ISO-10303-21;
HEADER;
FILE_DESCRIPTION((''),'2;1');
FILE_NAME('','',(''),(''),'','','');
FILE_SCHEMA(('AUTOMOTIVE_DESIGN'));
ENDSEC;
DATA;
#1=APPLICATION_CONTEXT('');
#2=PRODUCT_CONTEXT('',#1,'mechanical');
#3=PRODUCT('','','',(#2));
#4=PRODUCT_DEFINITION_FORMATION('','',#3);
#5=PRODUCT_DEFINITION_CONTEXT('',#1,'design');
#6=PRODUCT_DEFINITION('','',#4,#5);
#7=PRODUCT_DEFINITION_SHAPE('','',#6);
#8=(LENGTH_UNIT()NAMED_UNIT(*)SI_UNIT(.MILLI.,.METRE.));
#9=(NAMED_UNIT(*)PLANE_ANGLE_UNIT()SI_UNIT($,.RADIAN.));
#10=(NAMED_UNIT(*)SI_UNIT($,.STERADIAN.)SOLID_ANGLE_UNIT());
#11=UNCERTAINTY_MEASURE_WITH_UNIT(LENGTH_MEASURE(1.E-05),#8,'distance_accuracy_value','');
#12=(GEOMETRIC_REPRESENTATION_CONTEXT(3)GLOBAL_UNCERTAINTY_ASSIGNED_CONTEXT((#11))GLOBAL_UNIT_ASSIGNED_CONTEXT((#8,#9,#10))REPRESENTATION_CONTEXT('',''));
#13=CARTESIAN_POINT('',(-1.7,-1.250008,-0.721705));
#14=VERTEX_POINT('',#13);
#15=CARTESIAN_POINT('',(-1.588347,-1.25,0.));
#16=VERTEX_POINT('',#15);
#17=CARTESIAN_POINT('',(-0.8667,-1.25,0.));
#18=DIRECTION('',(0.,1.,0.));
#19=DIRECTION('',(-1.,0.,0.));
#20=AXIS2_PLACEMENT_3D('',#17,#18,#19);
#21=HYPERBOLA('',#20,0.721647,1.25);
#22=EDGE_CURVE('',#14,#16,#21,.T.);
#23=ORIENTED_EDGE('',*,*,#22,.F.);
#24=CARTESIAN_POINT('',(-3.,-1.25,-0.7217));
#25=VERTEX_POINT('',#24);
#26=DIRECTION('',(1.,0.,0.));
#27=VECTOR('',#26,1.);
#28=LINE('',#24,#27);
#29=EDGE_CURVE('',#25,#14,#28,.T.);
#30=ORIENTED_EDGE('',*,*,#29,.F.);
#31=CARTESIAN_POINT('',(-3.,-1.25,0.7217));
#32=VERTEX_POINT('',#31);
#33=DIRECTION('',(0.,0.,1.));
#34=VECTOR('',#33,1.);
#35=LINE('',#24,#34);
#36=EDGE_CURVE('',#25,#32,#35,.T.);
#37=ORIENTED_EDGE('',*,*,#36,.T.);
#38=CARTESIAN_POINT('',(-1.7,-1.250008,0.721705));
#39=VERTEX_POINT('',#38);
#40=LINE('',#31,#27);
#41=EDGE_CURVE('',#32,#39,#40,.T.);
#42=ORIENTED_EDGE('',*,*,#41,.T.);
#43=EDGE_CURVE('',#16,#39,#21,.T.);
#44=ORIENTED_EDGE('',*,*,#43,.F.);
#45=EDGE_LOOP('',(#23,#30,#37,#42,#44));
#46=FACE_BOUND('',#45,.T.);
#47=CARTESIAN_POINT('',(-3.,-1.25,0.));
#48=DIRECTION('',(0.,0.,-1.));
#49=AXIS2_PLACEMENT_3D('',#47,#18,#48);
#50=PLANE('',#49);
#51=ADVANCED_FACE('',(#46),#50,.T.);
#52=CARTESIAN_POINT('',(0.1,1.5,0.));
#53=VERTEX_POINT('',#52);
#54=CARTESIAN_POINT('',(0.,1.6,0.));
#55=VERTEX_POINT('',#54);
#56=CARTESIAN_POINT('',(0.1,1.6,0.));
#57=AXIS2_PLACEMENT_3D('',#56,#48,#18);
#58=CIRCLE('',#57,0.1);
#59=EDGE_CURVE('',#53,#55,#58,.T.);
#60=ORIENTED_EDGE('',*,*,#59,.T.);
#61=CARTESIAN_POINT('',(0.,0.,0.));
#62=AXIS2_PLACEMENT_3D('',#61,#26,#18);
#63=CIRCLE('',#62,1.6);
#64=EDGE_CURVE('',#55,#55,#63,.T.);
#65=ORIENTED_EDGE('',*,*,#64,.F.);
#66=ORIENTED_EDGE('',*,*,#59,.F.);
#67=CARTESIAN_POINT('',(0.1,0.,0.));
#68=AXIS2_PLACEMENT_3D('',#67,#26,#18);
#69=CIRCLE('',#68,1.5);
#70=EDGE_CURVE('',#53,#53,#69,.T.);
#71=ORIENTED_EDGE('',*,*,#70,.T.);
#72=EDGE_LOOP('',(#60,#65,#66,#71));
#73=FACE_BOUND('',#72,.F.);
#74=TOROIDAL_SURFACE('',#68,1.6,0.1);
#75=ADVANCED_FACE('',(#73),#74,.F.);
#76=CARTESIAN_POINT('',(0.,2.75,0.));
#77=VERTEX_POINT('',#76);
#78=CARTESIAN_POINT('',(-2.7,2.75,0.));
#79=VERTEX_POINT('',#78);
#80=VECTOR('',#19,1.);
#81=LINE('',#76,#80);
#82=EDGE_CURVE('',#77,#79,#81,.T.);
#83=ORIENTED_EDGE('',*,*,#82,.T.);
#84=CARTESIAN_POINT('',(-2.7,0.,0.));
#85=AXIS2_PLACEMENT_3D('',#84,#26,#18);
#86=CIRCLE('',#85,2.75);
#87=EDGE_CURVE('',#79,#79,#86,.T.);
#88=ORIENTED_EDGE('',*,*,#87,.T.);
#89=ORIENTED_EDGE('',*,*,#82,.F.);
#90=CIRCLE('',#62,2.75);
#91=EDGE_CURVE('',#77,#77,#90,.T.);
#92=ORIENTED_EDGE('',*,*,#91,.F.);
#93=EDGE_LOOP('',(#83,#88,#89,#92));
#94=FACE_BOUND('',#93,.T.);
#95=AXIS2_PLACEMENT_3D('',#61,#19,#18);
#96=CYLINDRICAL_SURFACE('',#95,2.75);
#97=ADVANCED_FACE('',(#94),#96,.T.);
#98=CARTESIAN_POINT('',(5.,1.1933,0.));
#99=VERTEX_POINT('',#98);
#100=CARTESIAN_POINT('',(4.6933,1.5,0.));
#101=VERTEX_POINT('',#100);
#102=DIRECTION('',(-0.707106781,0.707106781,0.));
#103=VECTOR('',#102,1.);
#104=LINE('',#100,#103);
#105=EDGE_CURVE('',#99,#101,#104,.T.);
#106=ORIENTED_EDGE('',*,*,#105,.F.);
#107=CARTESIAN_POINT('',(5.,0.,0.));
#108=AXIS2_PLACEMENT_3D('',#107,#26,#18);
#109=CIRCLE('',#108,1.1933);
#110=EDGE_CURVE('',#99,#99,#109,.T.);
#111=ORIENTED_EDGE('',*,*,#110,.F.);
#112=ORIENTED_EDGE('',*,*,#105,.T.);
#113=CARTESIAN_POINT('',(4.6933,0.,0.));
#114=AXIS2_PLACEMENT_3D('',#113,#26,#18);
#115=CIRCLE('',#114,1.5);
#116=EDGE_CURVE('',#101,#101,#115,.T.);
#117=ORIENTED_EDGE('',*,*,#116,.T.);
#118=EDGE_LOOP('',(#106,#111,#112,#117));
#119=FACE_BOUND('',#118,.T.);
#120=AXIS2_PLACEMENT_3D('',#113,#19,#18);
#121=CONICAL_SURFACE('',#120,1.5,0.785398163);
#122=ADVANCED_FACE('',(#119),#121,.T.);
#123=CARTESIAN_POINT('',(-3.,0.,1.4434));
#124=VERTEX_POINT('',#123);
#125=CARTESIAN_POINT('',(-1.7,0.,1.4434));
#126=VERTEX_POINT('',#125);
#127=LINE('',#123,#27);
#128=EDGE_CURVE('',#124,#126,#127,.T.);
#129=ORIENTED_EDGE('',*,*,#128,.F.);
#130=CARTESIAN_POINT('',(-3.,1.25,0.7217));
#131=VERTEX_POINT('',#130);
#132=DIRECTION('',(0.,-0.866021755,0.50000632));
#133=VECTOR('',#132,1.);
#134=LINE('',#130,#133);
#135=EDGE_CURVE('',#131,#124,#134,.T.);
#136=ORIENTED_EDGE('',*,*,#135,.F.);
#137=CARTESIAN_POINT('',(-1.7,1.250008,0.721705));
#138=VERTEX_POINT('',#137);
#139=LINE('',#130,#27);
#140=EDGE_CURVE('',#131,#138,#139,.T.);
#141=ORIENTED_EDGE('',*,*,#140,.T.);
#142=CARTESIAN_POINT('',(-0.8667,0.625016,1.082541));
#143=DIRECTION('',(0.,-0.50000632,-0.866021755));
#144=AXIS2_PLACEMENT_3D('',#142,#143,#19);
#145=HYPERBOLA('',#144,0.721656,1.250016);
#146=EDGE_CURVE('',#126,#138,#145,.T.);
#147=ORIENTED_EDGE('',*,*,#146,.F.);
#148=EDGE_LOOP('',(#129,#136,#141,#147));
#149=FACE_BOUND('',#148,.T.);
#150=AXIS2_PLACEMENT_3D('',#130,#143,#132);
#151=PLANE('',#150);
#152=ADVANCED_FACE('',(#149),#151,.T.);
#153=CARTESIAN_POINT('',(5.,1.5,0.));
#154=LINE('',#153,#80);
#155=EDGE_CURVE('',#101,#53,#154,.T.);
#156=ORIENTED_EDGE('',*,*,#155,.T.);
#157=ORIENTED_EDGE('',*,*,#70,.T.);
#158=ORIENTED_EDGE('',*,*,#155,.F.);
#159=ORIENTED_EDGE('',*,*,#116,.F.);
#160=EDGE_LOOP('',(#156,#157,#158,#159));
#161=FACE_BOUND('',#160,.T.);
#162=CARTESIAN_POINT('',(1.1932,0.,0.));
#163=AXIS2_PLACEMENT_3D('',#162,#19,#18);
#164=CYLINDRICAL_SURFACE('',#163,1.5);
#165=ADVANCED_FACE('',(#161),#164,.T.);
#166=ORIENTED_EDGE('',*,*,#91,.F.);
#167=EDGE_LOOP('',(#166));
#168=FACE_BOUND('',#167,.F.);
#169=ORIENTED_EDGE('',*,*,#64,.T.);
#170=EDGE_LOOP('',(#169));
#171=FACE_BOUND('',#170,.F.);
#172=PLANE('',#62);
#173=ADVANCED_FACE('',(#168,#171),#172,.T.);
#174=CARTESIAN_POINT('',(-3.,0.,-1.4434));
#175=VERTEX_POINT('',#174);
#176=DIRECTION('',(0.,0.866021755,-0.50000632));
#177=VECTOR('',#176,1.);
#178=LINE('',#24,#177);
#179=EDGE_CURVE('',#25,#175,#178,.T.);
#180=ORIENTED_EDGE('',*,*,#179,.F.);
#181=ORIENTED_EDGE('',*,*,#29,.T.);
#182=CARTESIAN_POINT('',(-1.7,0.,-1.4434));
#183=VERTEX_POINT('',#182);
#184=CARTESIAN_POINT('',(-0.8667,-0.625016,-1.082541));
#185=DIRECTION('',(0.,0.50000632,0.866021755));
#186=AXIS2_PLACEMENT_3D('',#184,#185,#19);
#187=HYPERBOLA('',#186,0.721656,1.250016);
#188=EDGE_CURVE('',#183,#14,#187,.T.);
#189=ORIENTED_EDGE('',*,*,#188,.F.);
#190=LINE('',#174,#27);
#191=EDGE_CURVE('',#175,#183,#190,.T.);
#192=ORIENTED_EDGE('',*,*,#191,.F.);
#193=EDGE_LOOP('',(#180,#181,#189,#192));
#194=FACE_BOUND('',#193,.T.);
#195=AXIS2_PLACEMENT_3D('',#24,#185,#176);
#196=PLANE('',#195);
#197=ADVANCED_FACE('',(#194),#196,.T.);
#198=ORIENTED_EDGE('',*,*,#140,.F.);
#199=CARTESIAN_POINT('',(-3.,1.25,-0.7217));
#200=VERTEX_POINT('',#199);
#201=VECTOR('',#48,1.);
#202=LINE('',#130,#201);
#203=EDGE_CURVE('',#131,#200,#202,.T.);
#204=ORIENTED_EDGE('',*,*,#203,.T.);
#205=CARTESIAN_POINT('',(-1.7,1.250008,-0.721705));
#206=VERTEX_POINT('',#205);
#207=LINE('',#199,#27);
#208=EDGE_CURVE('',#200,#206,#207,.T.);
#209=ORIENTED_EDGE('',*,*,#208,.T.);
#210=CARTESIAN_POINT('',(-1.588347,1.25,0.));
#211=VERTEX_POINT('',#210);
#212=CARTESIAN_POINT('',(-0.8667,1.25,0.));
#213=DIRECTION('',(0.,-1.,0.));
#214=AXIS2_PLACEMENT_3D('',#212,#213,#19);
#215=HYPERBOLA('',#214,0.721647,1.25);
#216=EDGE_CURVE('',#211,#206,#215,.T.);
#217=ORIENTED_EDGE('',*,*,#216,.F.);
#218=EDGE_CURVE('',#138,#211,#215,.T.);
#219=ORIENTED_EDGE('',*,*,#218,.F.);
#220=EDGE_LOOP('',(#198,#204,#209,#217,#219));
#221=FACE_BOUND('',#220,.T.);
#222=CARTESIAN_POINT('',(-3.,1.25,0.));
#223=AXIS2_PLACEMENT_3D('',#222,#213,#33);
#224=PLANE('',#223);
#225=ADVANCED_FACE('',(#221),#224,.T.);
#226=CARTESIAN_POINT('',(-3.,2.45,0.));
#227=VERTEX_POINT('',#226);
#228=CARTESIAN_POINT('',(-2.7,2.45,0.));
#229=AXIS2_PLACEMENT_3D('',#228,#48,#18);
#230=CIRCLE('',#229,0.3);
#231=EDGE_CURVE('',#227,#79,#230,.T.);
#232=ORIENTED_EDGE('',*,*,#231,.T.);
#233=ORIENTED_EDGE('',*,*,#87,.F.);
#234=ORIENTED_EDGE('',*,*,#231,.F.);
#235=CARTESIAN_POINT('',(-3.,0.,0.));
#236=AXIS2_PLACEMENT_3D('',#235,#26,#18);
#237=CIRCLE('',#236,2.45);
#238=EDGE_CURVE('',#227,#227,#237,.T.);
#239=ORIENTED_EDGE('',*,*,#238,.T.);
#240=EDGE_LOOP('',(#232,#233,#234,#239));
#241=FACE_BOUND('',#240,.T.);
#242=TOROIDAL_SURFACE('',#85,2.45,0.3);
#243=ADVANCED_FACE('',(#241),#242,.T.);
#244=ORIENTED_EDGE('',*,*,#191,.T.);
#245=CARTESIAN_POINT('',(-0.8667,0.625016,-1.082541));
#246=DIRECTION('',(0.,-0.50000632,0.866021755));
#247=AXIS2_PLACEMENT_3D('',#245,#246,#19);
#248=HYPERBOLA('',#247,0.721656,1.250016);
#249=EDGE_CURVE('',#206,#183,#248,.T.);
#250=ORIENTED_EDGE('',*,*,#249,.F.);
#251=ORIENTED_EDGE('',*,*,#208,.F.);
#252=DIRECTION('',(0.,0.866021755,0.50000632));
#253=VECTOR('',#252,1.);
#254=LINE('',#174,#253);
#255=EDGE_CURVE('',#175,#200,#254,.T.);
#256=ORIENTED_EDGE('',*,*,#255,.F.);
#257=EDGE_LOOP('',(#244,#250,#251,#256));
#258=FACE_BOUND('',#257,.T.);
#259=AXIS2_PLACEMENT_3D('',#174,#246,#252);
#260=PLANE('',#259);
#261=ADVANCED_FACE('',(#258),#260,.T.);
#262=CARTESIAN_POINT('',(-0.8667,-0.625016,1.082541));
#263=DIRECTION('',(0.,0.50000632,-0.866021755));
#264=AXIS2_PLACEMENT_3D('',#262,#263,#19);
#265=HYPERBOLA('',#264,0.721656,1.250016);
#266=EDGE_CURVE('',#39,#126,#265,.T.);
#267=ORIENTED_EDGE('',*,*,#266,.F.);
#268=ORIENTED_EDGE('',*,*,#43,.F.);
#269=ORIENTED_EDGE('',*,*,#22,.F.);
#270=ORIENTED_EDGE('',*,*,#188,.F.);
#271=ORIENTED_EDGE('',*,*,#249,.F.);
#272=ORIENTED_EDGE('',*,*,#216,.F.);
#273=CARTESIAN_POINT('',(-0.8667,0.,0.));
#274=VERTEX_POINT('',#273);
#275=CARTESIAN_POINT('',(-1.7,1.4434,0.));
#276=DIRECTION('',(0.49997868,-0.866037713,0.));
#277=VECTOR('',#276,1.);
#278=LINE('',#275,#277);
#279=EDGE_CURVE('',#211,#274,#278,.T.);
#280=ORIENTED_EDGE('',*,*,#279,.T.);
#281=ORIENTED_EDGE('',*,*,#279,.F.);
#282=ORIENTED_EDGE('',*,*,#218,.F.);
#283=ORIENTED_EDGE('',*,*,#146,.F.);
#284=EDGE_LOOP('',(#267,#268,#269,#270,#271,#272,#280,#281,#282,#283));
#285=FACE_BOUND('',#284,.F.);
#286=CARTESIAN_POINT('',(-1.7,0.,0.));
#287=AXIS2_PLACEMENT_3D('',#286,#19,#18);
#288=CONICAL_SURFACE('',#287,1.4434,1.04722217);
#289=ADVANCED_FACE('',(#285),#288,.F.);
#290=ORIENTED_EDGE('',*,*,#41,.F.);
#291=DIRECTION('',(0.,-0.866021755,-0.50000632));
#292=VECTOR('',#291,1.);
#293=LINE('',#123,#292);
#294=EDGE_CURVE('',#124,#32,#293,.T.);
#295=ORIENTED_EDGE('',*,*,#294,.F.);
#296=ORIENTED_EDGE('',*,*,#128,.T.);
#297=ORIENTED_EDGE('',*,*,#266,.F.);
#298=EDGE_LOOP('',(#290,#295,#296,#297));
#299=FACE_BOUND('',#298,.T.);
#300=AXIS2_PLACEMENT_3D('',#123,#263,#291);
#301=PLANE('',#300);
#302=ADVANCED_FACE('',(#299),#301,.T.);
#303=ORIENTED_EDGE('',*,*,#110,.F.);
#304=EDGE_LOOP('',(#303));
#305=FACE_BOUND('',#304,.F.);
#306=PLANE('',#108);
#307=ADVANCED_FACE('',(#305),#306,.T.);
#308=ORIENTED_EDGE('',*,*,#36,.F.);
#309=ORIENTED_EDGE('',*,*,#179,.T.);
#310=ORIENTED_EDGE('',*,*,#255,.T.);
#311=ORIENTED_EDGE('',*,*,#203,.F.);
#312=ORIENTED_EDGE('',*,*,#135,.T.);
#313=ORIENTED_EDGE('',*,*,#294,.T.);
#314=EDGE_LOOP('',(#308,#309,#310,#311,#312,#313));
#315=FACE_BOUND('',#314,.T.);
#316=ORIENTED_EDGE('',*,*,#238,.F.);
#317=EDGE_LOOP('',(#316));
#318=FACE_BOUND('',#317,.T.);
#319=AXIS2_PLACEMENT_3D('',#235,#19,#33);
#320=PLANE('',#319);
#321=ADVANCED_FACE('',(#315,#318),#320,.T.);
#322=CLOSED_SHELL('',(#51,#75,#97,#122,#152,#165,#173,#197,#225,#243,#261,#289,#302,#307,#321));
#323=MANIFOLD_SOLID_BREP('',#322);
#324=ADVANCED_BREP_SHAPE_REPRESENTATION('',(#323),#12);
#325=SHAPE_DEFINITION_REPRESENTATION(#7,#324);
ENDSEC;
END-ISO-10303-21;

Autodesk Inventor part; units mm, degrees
ref_plane "YZ Plane" through (0, 0, 0) normal (1, 0, 0) x (0, 1, 0)
ref_plane "XZ Plane" through (0, 0, 0) normal (0, 1, 0) x (-1, 0, 0)
sketch "Sketch1" plane through (0, 0, 0) normal (0, 0, 1) x (1, 0, 0)
  line L0 (-0.8667, 0) -> (5, 0)
  line L1 (5, 0) -> (5, 1.5)
  line L2 (5, 1.5) -> (1.5, 1.5)
  line L3 (1.5, 1.5) -> (1.1932, 1.5)
  line L4 (1.1932, 1.5) -> (0, 1.5)
  line L5 (0, 1.5) -> (0, 2.75)
  line L6 (0, 2.75) -> (-3, 2.75)
  line L7 (-3, 2.75) -> (-3, 1.4434)
  line L8 (-3, 1.4434) -> (-1.7, 1.4434)
  line L9 (-1.7, 1.4434) -> (-0.8667, 0)
  line L10 (-4.6, 0) -> (6.6, 0) projected
  line L11 (0, -0.55) -> (0, 3.3) projected
  line L12 (1.5, 1.5) -> (0, 1.5) construction
  dimension "d1" = 3.5
  dimension "d2" = 0.3068
  dimension "d3" = 3
  dimension "d4" = 1.3
  dimension "d5" = 60
  dimension "d6" = 3
  dimension "d7" = 3
  dimension "d8" = 2.8868
  dimension "d9" = 5.5
  dimension "d26" = 5
revolve "Body" add sketch "Sketch1" angle 360 about axis through (-0.8667, 0, 0) along (1, 0, 0)
sketch "Sketch2" plane through (-3, 0, 0) normal (-1, 0, 0) x (0, 0, 1)
  circle A0 centre (0, 0) radius 1.4434 projected
  line L0 (0, -3.85) -> (0, 3.85) projected
  line L1 (-3.85, 0) -> (3.85, 0) projected
  line L2 (1.4434, 0) -> (0.7217, -1.25)
  line L3 (0.7217, -1.25) -> (-0.7217, -1.25)
  line L4 (-0.7217, -1.25) -> (-1.4434, 0)
  line L5 (-1.4434, 0) -> (-0.7217, 1.25)
  line L6 (-0.7217, 1.25) -> (0.7217, 1.25)
  line L7 (0.7217, 1.25) -> (1.4434, 0)
extrude "Slot" add sketch "Sketch2" against normal up to next contours L7 A0 | A0 L2 | L6 L0 A0 | A0 L0 L3 | L0 L6 A0 | A0 L3 L0 | L4 A0 | A0 L5
fillet "Fillet1" radius 0.3 1 edges at (-3, -2.75, 0)
thread "Thread" size "M3x0.5" class "6g" standard "ISO Metric profile" length 3.5
chamfer "Chamfer1" distance 0.3067 distance2 0.3067 1 edges at (5, -1.5, 0) measured on face at (5, -0.2617, -0.7882)
ref_plane "Work Plane1" through (29, 0, 0) normal (0, -1, 0) x (1, 0, 0)
fillet "Fillet2" radius 0.1 1 edges at (0, -1.5, 0)
equation "\"d30\" = R"
equation "\"d17\" = RR"
equation "\"d13\" = GEL"
equation "\"d15\" = -0.5 * SPD + 0.5 * GD"
equation "\"d16\" = GUL"
equation "\"d1\" = GEL"
equation "\"d3\" = KOH"
equation "\"d4\" = INTI"
equation "\"d6\" = GD"
equation "\"d7\" = BDM"
equation "\"d8\" = 1.1547 * SW"
equation "\"d9\" = KOD"
equation "\"d26\" = NLG"
equation "\"GD\" = 3"
equation "\"NLG\" = 5"
equation "\"GEL\" = 3.5"
equation "\"KOD\" = 5.5"
equation "\"KOH\" = 3"
equation "\"INTI\" = 1.3"
equation "\"GAL\" = 0.61345 * PTC"
equation "\"GUL\" = 0.61345 * PTC"
equation "\"BDM\" = NND"
equation "\"SW\" = 2.5"
equation "\"RR\" = 0.3"
equation "\"SPD\" = NND - 1.2269 * PTC"
equation "\"R\" = 0.1"
equation "\"TOA\" = 30deg"
equation "\"GD1\" = THREADDIA - 1.2269 * PTC"
equation "\"THREADDIA\" = 3"
equation "\"FAWI\" = 45deg"
equation "\"PTC\" = 0.5"
equation "\"NND\" = 3"
equation "\"E0\" = 1.155 * SW"
properties part number "ISO 4762  - M3 x 5" material "Stainless Steel, 440C"
